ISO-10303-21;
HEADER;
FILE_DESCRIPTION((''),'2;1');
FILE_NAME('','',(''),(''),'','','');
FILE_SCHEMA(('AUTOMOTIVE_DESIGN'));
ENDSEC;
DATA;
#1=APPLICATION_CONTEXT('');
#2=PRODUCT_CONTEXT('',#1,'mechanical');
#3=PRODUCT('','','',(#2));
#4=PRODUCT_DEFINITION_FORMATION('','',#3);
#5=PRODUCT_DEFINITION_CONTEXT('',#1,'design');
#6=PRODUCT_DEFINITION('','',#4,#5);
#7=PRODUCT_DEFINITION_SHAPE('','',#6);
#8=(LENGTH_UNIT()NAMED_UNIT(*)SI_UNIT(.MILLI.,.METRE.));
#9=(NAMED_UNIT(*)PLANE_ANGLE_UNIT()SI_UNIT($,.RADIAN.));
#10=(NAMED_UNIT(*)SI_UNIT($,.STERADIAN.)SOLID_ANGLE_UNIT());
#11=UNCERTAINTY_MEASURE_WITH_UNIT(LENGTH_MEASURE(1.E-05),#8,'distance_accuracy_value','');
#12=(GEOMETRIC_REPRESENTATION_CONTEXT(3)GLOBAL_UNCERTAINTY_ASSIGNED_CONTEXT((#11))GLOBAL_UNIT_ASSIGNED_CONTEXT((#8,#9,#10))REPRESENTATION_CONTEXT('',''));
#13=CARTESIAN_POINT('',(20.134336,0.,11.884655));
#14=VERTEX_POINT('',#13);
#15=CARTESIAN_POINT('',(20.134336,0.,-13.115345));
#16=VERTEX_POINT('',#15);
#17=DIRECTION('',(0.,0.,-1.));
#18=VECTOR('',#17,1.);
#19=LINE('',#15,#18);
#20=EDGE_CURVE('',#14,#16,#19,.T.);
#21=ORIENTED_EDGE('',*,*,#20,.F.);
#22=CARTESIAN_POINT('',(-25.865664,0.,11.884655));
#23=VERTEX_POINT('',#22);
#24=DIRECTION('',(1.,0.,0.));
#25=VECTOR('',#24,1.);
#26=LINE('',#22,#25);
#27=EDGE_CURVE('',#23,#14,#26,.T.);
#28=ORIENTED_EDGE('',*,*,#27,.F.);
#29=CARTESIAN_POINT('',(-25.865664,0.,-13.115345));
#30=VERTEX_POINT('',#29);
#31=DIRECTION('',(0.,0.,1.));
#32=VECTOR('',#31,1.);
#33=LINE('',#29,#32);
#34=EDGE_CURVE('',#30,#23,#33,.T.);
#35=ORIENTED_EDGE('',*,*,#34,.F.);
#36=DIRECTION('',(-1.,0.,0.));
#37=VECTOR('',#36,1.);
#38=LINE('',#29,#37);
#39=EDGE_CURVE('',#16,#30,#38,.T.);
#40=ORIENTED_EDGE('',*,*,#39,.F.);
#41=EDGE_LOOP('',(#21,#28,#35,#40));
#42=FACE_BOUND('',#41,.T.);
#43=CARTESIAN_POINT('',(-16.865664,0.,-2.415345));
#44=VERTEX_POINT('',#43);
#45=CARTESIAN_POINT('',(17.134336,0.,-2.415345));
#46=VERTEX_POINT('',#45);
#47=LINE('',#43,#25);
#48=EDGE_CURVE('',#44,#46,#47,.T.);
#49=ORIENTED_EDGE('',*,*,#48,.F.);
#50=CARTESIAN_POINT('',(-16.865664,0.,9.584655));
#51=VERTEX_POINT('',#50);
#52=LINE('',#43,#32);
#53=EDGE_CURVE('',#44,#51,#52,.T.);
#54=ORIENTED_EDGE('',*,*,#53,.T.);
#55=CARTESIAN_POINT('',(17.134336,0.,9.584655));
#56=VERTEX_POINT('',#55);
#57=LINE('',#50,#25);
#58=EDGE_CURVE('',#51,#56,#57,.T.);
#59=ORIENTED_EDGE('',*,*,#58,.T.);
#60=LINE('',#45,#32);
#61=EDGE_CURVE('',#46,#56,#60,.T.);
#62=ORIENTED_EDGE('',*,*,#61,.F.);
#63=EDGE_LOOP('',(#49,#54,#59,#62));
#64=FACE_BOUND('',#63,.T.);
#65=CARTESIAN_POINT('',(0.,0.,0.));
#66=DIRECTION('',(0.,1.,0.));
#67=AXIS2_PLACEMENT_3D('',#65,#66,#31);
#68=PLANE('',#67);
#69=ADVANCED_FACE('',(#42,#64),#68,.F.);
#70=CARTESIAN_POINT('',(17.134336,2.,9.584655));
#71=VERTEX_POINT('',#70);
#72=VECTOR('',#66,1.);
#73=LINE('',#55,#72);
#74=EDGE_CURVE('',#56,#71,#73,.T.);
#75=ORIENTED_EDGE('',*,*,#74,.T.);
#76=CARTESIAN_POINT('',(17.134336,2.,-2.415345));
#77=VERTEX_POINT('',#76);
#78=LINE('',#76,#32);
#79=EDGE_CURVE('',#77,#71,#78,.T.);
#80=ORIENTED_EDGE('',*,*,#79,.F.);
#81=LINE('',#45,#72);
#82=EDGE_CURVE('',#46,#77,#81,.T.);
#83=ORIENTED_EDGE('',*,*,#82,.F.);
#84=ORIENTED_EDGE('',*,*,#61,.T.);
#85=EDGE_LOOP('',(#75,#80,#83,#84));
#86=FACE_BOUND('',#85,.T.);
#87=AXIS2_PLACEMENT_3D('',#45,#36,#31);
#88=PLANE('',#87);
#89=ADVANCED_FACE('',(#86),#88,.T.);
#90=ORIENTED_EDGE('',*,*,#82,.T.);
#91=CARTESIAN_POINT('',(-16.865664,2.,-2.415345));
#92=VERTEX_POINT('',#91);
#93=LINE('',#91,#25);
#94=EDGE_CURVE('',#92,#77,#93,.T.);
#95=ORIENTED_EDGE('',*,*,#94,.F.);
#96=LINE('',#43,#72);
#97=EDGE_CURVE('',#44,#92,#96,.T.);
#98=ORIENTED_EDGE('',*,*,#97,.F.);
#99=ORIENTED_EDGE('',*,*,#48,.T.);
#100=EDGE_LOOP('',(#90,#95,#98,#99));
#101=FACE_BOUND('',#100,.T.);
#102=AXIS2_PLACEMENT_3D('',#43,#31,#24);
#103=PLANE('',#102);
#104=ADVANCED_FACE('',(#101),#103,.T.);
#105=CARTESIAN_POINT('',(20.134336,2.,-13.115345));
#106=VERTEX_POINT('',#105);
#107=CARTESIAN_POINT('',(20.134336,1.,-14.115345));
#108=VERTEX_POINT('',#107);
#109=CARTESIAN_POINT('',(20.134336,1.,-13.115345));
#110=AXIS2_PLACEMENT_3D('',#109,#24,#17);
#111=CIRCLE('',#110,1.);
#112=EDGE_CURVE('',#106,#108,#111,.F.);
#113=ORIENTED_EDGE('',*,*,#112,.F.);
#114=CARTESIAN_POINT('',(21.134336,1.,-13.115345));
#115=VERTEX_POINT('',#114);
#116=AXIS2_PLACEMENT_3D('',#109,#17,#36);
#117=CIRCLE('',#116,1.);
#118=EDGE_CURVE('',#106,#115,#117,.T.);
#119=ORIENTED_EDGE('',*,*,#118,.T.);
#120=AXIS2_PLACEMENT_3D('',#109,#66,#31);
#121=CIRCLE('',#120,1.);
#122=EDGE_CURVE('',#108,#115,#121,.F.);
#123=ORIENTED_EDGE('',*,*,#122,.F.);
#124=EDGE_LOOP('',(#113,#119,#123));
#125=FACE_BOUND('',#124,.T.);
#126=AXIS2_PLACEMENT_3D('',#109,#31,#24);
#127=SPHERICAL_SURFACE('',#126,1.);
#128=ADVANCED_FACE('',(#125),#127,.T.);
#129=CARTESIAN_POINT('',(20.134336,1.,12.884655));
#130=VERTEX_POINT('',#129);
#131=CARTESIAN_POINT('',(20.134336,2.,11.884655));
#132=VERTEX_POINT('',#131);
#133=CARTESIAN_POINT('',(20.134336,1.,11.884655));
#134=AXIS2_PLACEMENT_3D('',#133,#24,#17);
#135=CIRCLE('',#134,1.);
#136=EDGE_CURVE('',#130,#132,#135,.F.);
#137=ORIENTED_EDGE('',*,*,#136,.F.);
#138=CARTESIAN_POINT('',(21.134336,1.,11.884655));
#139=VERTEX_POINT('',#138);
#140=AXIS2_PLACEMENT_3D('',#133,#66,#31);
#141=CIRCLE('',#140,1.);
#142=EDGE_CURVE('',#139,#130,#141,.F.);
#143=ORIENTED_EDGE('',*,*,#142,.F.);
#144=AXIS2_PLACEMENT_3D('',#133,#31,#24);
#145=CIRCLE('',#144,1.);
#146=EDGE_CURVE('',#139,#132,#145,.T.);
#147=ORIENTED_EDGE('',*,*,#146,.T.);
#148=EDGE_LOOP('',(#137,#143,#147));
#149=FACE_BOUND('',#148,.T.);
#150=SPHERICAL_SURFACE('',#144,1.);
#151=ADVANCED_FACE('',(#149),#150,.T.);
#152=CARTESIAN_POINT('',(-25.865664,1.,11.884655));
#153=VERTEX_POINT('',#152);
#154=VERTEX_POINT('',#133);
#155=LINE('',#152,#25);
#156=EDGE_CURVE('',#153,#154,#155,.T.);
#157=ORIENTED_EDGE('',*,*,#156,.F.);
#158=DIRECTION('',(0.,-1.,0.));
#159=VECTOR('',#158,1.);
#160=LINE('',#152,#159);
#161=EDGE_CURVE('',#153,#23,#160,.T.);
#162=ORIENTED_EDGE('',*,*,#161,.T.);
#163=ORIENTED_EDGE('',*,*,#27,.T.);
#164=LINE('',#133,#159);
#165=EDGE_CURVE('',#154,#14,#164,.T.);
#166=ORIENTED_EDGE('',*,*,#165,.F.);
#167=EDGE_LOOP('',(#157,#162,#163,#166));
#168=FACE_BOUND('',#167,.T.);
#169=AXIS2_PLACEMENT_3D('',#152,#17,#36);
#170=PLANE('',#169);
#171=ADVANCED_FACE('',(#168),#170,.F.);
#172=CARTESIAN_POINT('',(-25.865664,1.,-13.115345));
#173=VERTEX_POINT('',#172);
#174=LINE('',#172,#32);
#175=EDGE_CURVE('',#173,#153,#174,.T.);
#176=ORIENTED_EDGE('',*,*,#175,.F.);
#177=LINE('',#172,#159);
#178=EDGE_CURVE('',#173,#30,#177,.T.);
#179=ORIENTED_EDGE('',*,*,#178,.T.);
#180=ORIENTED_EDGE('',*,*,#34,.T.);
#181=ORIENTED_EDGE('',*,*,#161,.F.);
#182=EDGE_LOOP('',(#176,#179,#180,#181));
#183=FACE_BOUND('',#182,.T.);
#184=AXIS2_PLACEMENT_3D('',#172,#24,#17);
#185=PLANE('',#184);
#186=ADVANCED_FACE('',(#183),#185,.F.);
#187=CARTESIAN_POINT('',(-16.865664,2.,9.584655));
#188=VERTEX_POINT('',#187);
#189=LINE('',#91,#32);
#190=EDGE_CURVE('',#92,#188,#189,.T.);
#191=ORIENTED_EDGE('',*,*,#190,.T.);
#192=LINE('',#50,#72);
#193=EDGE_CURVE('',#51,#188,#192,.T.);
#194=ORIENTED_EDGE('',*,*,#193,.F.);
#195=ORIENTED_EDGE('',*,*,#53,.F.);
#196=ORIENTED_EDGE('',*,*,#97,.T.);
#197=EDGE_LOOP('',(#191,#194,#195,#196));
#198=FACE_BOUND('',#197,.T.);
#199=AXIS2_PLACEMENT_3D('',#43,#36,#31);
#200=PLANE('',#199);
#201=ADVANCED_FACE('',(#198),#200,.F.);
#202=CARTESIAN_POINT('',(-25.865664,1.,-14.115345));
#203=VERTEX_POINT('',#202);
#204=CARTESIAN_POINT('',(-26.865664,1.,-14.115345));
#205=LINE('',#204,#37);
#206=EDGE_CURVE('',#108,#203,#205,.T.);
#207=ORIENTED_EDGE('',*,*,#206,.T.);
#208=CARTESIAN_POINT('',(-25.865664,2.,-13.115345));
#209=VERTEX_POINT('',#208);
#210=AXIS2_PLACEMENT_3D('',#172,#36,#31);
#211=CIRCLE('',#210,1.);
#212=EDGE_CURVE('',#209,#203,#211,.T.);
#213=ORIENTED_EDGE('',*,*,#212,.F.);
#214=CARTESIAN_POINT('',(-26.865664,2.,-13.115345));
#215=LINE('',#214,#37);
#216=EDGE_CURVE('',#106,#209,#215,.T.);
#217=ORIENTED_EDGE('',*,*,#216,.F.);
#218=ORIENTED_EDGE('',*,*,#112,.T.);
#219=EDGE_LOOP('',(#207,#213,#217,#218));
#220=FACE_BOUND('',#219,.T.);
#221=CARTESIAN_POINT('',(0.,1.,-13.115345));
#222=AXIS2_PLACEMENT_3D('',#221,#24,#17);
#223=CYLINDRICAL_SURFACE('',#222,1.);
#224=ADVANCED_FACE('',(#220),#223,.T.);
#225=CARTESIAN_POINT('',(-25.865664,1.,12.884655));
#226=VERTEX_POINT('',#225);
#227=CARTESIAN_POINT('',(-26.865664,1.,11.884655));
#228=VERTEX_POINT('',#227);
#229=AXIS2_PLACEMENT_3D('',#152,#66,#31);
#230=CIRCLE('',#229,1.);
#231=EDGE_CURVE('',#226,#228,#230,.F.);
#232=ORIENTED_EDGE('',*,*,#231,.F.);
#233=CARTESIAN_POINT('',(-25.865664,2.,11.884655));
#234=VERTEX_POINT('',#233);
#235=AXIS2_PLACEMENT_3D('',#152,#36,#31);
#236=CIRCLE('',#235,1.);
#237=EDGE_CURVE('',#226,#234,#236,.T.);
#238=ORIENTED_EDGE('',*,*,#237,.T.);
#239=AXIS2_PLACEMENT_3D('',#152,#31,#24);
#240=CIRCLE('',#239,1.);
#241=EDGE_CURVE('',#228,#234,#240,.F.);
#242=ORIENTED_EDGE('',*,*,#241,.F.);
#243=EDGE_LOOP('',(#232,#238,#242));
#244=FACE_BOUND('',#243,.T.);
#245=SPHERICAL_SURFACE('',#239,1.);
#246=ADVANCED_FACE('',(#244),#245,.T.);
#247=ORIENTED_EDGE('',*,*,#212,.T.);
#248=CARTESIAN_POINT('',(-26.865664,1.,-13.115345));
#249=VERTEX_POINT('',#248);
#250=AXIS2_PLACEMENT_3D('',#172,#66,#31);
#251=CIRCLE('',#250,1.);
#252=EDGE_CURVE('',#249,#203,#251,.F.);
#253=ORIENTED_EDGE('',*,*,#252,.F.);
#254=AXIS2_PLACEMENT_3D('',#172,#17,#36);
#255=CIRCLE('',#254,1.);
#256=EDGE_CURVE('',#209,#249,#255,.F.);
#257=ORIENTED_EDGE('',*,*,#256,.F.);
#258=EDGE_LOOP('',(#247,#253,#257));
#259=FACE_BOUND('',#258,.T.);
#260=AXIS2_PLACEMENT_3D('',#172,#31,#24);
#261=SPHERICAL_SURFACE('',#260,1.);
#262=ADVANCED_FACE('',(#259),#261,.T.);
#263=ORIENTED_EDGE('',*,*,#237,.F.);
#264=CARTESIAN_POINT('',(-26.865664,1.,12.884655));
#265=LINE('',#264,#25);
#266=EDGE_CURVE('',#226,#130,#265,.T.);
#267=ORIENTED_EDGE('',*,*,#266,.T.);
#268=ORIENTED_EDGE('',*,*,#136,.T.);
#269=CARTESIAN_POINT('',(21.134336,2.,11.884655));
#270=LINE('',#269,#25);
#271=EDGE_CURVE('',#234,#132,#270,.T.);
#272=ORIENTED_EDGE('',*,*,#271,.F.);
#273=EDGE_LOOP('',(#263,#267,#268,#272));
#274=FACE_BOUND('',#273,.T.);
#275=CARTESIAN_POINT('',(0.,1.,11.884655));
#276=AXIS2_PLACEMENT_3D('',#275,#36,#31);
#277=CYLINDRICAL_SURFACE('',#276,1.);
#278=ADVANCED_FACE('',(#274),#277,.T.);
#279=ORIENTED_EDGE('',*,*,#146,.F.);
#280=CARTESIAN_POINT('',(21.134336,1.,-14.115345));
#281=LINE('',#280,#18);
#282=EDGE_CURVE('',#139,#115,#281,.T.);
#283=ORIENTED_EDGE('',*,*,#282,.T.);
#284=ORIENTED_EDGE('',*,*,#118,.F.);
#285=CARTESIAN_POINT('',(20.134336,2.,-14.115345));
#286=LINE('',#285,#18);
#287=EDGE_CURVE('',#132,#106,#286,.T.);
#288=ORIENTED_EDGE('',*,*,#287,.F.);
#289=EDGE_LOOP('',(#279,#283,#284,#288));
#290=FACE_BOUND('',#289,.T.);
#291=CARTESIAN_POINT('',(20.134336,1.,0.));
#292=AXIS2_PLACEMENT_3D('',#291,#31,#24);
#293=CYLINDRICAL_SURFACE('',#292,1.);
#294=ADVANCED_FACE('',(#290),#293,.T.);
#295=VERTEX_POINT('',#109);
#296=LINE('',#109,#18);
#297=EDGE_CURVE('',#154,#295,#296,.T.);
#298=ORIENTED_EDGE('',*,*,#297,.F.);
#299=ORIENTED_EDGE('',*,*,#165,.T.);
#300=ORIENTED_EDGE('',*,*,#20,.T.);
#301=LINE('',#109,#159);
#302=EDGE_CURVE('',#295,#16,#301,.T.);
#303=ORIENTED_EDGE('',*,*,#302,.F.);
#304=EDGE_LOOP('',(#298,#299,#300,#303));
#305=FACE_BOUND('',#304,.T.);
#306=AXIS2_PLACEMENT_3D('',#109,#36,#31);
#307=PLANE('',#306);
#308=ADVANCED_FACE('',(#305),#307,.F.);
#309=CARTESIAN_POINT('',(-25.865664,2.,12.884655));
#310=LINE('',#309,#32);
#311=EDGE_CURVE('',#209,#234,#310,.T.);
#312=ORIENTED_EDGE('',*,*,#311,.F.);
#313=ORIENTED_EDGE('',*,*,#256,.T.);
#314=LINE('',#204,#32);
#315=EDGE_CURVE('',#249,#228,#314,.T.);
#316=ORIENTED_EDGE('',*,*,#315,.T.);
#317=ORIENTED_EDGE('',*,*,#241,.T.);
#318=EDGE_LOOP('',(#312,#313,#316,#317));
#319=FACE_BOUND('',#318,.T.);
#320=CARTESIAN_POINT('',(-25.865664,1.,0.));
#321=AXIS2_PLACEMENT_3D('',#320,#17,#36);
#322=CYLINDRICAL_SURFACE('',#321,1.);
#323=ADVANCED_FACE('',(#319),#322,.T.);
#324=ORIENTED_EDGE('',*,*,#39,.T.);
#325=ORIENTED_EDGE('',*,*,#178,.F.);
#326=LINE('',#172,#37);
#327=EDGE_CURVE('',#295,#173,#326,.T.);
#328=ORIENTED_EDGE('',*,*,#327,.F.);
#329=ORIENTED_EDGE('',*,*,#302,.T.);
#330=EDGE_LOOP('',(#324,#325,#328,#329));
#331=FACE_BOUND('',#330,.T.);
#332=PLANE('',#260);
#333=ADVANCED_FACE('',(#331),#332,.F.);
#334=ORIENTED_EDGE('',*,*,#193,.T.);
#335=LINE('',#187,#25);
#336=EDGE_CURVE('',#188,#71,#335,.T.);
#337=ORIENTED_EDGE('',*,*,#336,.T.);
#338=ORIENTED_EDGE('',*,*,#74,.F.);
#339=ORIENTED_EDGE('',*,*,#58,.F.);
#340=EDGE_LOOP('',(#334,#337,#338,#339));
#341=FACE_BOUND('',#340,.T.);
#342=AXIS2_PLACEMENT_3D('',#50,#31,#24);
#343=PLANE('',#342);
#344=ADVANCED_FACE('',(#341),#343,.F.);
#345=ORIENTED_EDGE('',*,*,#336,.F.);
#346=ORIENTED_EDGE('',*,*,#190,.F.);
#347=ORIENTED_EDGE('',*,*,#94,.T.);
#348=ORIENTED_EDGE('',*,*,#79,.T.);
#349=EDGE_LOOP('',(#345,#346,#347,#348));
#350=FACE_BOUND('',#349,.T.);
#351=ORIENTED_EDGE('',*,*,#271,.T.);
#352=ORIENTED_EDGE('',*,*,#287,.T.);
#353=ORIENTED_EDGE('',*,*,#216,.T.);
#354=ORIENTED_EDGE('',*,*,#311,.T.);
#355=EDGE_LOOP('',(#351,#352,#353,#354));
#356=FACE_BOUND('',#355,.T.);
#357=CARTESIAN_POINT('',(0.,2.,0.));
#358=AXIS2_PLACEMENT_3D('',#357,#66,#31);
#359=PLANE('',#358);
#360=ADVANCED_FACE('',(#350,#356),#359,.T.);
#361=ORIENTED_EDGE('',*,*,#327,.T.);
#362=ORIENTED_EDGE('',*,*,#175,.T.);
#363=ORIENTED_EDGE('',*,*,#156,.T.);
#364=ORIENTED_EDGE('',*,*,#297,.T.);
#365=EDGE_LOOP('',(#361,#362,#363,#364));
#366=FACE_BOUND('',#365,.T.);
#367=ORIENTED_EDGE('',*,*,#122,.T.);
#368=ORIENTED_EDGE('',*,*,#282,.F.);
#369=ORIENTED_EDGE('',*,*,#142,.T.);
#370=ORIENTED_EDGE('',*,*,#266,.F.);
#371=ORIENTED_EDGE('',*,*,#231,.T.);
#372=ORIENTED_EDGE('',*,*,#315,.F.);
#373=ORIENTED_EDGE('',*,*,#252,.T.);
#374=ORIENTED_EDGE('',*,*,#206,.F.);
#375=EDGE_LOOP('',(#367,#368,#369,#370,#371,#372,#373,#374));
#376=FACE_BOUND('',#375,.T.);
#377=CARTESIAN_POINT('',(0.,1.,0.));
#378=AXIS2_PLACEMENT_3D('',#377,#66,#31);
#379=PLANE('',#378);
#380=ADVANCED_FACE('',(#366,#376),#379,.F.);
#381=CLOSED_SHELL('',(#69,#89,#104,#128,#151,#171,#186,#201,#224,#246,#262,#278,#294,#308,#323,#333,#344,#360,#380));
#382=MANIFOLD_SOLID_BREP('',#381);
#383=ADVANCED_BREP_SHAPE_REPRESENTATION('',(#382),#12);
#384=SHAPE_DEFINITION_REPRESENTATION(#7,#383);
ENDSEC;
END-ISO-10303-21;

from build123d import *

# Parameters (mm, degrees)
SKETCH_1_W          = 46
SKETCH_1_H          = 25
EXTRUDE_1_DEPTH     = 1
SKETCH_2_W          = 48
SKETCH_2_H          = 27
EXTRUDE_2_DEPTH     = 1
FILLET_1_R          = 1
SKETCH_3_W          = 34
SKETCH_3_H          = 12
CUT_EXTRUDE_2_DEPTH = 2


with BuildPart() as part:
    # ｽｹｯﾁ1 → ﾎﾞｽ - 押し出し1 (new body)
    with BuildSketch(Plane(origin=(0, 0, 0), x_dir=(1, 0, 0), z_dir=(0, 1, 0))):
        with Locations((-2.865663922, 0.615345108)):
            Rectangle(SKETCH_1_W, SKETCH_1_H)
    extrude(amount=EXTRUDE_1_DEPTH)

    # ｽｹｯﾁ2 → ﾎﾞｽ - 押し出し2 (add)
    with BuildSketch(Plane(origin=(0, 1, 0), x_dir=(1, 0, 0), z_dir=(0, 1, 0))):
        with Locations((-2.865663922, 0.615345108)):
            Rectangle(SKETCH_2_W, SKETCH_2_H)
    extrude(amount=EXTRUDE_2_DEPTH)

    # ﾌｨﾚｯﾄ1
    fillet_1_edges = [part.edges().sort_by_distance(p)[0] for p in [
        (-26.865663922, 1.5, -14.115345108),
        (-26.865663922, 1.5, 12.884654892),
        (21.134336078, 1.5, 12.884654892),
        (21.134336078, 1.5, -14.115345108),
        (-26.865663922, 2, -0.615345108),
        (-2.865663922, 2, 12.884654892),
        (21.134336078, 2, -0.615345108),
        (-2.865663922, 2, -14.115345108),
    ]]
    fillet(fillet_1_edges, radius=FILLET_1_R - 0.0001)  # a hair under: the kernel refuses the full size

    # ｽｹｯﾁ3 → ｶｯﾄ - 押し出し2 (cut)
    with BuildSketch(Plane(origin=(0, 2, 0), x_dir=(1, 0, 0), z_dir=(0, 1, 0))):
        with Locations((0.134336078, -3.584654892)):
            Rectangle(SKETCH_3_W, SKETCH_3_H)
    extrude(amount=-CUT_EXTRUDE_2_DEPTH, mode=Mode.SUBTRACT)


solid = part.part
